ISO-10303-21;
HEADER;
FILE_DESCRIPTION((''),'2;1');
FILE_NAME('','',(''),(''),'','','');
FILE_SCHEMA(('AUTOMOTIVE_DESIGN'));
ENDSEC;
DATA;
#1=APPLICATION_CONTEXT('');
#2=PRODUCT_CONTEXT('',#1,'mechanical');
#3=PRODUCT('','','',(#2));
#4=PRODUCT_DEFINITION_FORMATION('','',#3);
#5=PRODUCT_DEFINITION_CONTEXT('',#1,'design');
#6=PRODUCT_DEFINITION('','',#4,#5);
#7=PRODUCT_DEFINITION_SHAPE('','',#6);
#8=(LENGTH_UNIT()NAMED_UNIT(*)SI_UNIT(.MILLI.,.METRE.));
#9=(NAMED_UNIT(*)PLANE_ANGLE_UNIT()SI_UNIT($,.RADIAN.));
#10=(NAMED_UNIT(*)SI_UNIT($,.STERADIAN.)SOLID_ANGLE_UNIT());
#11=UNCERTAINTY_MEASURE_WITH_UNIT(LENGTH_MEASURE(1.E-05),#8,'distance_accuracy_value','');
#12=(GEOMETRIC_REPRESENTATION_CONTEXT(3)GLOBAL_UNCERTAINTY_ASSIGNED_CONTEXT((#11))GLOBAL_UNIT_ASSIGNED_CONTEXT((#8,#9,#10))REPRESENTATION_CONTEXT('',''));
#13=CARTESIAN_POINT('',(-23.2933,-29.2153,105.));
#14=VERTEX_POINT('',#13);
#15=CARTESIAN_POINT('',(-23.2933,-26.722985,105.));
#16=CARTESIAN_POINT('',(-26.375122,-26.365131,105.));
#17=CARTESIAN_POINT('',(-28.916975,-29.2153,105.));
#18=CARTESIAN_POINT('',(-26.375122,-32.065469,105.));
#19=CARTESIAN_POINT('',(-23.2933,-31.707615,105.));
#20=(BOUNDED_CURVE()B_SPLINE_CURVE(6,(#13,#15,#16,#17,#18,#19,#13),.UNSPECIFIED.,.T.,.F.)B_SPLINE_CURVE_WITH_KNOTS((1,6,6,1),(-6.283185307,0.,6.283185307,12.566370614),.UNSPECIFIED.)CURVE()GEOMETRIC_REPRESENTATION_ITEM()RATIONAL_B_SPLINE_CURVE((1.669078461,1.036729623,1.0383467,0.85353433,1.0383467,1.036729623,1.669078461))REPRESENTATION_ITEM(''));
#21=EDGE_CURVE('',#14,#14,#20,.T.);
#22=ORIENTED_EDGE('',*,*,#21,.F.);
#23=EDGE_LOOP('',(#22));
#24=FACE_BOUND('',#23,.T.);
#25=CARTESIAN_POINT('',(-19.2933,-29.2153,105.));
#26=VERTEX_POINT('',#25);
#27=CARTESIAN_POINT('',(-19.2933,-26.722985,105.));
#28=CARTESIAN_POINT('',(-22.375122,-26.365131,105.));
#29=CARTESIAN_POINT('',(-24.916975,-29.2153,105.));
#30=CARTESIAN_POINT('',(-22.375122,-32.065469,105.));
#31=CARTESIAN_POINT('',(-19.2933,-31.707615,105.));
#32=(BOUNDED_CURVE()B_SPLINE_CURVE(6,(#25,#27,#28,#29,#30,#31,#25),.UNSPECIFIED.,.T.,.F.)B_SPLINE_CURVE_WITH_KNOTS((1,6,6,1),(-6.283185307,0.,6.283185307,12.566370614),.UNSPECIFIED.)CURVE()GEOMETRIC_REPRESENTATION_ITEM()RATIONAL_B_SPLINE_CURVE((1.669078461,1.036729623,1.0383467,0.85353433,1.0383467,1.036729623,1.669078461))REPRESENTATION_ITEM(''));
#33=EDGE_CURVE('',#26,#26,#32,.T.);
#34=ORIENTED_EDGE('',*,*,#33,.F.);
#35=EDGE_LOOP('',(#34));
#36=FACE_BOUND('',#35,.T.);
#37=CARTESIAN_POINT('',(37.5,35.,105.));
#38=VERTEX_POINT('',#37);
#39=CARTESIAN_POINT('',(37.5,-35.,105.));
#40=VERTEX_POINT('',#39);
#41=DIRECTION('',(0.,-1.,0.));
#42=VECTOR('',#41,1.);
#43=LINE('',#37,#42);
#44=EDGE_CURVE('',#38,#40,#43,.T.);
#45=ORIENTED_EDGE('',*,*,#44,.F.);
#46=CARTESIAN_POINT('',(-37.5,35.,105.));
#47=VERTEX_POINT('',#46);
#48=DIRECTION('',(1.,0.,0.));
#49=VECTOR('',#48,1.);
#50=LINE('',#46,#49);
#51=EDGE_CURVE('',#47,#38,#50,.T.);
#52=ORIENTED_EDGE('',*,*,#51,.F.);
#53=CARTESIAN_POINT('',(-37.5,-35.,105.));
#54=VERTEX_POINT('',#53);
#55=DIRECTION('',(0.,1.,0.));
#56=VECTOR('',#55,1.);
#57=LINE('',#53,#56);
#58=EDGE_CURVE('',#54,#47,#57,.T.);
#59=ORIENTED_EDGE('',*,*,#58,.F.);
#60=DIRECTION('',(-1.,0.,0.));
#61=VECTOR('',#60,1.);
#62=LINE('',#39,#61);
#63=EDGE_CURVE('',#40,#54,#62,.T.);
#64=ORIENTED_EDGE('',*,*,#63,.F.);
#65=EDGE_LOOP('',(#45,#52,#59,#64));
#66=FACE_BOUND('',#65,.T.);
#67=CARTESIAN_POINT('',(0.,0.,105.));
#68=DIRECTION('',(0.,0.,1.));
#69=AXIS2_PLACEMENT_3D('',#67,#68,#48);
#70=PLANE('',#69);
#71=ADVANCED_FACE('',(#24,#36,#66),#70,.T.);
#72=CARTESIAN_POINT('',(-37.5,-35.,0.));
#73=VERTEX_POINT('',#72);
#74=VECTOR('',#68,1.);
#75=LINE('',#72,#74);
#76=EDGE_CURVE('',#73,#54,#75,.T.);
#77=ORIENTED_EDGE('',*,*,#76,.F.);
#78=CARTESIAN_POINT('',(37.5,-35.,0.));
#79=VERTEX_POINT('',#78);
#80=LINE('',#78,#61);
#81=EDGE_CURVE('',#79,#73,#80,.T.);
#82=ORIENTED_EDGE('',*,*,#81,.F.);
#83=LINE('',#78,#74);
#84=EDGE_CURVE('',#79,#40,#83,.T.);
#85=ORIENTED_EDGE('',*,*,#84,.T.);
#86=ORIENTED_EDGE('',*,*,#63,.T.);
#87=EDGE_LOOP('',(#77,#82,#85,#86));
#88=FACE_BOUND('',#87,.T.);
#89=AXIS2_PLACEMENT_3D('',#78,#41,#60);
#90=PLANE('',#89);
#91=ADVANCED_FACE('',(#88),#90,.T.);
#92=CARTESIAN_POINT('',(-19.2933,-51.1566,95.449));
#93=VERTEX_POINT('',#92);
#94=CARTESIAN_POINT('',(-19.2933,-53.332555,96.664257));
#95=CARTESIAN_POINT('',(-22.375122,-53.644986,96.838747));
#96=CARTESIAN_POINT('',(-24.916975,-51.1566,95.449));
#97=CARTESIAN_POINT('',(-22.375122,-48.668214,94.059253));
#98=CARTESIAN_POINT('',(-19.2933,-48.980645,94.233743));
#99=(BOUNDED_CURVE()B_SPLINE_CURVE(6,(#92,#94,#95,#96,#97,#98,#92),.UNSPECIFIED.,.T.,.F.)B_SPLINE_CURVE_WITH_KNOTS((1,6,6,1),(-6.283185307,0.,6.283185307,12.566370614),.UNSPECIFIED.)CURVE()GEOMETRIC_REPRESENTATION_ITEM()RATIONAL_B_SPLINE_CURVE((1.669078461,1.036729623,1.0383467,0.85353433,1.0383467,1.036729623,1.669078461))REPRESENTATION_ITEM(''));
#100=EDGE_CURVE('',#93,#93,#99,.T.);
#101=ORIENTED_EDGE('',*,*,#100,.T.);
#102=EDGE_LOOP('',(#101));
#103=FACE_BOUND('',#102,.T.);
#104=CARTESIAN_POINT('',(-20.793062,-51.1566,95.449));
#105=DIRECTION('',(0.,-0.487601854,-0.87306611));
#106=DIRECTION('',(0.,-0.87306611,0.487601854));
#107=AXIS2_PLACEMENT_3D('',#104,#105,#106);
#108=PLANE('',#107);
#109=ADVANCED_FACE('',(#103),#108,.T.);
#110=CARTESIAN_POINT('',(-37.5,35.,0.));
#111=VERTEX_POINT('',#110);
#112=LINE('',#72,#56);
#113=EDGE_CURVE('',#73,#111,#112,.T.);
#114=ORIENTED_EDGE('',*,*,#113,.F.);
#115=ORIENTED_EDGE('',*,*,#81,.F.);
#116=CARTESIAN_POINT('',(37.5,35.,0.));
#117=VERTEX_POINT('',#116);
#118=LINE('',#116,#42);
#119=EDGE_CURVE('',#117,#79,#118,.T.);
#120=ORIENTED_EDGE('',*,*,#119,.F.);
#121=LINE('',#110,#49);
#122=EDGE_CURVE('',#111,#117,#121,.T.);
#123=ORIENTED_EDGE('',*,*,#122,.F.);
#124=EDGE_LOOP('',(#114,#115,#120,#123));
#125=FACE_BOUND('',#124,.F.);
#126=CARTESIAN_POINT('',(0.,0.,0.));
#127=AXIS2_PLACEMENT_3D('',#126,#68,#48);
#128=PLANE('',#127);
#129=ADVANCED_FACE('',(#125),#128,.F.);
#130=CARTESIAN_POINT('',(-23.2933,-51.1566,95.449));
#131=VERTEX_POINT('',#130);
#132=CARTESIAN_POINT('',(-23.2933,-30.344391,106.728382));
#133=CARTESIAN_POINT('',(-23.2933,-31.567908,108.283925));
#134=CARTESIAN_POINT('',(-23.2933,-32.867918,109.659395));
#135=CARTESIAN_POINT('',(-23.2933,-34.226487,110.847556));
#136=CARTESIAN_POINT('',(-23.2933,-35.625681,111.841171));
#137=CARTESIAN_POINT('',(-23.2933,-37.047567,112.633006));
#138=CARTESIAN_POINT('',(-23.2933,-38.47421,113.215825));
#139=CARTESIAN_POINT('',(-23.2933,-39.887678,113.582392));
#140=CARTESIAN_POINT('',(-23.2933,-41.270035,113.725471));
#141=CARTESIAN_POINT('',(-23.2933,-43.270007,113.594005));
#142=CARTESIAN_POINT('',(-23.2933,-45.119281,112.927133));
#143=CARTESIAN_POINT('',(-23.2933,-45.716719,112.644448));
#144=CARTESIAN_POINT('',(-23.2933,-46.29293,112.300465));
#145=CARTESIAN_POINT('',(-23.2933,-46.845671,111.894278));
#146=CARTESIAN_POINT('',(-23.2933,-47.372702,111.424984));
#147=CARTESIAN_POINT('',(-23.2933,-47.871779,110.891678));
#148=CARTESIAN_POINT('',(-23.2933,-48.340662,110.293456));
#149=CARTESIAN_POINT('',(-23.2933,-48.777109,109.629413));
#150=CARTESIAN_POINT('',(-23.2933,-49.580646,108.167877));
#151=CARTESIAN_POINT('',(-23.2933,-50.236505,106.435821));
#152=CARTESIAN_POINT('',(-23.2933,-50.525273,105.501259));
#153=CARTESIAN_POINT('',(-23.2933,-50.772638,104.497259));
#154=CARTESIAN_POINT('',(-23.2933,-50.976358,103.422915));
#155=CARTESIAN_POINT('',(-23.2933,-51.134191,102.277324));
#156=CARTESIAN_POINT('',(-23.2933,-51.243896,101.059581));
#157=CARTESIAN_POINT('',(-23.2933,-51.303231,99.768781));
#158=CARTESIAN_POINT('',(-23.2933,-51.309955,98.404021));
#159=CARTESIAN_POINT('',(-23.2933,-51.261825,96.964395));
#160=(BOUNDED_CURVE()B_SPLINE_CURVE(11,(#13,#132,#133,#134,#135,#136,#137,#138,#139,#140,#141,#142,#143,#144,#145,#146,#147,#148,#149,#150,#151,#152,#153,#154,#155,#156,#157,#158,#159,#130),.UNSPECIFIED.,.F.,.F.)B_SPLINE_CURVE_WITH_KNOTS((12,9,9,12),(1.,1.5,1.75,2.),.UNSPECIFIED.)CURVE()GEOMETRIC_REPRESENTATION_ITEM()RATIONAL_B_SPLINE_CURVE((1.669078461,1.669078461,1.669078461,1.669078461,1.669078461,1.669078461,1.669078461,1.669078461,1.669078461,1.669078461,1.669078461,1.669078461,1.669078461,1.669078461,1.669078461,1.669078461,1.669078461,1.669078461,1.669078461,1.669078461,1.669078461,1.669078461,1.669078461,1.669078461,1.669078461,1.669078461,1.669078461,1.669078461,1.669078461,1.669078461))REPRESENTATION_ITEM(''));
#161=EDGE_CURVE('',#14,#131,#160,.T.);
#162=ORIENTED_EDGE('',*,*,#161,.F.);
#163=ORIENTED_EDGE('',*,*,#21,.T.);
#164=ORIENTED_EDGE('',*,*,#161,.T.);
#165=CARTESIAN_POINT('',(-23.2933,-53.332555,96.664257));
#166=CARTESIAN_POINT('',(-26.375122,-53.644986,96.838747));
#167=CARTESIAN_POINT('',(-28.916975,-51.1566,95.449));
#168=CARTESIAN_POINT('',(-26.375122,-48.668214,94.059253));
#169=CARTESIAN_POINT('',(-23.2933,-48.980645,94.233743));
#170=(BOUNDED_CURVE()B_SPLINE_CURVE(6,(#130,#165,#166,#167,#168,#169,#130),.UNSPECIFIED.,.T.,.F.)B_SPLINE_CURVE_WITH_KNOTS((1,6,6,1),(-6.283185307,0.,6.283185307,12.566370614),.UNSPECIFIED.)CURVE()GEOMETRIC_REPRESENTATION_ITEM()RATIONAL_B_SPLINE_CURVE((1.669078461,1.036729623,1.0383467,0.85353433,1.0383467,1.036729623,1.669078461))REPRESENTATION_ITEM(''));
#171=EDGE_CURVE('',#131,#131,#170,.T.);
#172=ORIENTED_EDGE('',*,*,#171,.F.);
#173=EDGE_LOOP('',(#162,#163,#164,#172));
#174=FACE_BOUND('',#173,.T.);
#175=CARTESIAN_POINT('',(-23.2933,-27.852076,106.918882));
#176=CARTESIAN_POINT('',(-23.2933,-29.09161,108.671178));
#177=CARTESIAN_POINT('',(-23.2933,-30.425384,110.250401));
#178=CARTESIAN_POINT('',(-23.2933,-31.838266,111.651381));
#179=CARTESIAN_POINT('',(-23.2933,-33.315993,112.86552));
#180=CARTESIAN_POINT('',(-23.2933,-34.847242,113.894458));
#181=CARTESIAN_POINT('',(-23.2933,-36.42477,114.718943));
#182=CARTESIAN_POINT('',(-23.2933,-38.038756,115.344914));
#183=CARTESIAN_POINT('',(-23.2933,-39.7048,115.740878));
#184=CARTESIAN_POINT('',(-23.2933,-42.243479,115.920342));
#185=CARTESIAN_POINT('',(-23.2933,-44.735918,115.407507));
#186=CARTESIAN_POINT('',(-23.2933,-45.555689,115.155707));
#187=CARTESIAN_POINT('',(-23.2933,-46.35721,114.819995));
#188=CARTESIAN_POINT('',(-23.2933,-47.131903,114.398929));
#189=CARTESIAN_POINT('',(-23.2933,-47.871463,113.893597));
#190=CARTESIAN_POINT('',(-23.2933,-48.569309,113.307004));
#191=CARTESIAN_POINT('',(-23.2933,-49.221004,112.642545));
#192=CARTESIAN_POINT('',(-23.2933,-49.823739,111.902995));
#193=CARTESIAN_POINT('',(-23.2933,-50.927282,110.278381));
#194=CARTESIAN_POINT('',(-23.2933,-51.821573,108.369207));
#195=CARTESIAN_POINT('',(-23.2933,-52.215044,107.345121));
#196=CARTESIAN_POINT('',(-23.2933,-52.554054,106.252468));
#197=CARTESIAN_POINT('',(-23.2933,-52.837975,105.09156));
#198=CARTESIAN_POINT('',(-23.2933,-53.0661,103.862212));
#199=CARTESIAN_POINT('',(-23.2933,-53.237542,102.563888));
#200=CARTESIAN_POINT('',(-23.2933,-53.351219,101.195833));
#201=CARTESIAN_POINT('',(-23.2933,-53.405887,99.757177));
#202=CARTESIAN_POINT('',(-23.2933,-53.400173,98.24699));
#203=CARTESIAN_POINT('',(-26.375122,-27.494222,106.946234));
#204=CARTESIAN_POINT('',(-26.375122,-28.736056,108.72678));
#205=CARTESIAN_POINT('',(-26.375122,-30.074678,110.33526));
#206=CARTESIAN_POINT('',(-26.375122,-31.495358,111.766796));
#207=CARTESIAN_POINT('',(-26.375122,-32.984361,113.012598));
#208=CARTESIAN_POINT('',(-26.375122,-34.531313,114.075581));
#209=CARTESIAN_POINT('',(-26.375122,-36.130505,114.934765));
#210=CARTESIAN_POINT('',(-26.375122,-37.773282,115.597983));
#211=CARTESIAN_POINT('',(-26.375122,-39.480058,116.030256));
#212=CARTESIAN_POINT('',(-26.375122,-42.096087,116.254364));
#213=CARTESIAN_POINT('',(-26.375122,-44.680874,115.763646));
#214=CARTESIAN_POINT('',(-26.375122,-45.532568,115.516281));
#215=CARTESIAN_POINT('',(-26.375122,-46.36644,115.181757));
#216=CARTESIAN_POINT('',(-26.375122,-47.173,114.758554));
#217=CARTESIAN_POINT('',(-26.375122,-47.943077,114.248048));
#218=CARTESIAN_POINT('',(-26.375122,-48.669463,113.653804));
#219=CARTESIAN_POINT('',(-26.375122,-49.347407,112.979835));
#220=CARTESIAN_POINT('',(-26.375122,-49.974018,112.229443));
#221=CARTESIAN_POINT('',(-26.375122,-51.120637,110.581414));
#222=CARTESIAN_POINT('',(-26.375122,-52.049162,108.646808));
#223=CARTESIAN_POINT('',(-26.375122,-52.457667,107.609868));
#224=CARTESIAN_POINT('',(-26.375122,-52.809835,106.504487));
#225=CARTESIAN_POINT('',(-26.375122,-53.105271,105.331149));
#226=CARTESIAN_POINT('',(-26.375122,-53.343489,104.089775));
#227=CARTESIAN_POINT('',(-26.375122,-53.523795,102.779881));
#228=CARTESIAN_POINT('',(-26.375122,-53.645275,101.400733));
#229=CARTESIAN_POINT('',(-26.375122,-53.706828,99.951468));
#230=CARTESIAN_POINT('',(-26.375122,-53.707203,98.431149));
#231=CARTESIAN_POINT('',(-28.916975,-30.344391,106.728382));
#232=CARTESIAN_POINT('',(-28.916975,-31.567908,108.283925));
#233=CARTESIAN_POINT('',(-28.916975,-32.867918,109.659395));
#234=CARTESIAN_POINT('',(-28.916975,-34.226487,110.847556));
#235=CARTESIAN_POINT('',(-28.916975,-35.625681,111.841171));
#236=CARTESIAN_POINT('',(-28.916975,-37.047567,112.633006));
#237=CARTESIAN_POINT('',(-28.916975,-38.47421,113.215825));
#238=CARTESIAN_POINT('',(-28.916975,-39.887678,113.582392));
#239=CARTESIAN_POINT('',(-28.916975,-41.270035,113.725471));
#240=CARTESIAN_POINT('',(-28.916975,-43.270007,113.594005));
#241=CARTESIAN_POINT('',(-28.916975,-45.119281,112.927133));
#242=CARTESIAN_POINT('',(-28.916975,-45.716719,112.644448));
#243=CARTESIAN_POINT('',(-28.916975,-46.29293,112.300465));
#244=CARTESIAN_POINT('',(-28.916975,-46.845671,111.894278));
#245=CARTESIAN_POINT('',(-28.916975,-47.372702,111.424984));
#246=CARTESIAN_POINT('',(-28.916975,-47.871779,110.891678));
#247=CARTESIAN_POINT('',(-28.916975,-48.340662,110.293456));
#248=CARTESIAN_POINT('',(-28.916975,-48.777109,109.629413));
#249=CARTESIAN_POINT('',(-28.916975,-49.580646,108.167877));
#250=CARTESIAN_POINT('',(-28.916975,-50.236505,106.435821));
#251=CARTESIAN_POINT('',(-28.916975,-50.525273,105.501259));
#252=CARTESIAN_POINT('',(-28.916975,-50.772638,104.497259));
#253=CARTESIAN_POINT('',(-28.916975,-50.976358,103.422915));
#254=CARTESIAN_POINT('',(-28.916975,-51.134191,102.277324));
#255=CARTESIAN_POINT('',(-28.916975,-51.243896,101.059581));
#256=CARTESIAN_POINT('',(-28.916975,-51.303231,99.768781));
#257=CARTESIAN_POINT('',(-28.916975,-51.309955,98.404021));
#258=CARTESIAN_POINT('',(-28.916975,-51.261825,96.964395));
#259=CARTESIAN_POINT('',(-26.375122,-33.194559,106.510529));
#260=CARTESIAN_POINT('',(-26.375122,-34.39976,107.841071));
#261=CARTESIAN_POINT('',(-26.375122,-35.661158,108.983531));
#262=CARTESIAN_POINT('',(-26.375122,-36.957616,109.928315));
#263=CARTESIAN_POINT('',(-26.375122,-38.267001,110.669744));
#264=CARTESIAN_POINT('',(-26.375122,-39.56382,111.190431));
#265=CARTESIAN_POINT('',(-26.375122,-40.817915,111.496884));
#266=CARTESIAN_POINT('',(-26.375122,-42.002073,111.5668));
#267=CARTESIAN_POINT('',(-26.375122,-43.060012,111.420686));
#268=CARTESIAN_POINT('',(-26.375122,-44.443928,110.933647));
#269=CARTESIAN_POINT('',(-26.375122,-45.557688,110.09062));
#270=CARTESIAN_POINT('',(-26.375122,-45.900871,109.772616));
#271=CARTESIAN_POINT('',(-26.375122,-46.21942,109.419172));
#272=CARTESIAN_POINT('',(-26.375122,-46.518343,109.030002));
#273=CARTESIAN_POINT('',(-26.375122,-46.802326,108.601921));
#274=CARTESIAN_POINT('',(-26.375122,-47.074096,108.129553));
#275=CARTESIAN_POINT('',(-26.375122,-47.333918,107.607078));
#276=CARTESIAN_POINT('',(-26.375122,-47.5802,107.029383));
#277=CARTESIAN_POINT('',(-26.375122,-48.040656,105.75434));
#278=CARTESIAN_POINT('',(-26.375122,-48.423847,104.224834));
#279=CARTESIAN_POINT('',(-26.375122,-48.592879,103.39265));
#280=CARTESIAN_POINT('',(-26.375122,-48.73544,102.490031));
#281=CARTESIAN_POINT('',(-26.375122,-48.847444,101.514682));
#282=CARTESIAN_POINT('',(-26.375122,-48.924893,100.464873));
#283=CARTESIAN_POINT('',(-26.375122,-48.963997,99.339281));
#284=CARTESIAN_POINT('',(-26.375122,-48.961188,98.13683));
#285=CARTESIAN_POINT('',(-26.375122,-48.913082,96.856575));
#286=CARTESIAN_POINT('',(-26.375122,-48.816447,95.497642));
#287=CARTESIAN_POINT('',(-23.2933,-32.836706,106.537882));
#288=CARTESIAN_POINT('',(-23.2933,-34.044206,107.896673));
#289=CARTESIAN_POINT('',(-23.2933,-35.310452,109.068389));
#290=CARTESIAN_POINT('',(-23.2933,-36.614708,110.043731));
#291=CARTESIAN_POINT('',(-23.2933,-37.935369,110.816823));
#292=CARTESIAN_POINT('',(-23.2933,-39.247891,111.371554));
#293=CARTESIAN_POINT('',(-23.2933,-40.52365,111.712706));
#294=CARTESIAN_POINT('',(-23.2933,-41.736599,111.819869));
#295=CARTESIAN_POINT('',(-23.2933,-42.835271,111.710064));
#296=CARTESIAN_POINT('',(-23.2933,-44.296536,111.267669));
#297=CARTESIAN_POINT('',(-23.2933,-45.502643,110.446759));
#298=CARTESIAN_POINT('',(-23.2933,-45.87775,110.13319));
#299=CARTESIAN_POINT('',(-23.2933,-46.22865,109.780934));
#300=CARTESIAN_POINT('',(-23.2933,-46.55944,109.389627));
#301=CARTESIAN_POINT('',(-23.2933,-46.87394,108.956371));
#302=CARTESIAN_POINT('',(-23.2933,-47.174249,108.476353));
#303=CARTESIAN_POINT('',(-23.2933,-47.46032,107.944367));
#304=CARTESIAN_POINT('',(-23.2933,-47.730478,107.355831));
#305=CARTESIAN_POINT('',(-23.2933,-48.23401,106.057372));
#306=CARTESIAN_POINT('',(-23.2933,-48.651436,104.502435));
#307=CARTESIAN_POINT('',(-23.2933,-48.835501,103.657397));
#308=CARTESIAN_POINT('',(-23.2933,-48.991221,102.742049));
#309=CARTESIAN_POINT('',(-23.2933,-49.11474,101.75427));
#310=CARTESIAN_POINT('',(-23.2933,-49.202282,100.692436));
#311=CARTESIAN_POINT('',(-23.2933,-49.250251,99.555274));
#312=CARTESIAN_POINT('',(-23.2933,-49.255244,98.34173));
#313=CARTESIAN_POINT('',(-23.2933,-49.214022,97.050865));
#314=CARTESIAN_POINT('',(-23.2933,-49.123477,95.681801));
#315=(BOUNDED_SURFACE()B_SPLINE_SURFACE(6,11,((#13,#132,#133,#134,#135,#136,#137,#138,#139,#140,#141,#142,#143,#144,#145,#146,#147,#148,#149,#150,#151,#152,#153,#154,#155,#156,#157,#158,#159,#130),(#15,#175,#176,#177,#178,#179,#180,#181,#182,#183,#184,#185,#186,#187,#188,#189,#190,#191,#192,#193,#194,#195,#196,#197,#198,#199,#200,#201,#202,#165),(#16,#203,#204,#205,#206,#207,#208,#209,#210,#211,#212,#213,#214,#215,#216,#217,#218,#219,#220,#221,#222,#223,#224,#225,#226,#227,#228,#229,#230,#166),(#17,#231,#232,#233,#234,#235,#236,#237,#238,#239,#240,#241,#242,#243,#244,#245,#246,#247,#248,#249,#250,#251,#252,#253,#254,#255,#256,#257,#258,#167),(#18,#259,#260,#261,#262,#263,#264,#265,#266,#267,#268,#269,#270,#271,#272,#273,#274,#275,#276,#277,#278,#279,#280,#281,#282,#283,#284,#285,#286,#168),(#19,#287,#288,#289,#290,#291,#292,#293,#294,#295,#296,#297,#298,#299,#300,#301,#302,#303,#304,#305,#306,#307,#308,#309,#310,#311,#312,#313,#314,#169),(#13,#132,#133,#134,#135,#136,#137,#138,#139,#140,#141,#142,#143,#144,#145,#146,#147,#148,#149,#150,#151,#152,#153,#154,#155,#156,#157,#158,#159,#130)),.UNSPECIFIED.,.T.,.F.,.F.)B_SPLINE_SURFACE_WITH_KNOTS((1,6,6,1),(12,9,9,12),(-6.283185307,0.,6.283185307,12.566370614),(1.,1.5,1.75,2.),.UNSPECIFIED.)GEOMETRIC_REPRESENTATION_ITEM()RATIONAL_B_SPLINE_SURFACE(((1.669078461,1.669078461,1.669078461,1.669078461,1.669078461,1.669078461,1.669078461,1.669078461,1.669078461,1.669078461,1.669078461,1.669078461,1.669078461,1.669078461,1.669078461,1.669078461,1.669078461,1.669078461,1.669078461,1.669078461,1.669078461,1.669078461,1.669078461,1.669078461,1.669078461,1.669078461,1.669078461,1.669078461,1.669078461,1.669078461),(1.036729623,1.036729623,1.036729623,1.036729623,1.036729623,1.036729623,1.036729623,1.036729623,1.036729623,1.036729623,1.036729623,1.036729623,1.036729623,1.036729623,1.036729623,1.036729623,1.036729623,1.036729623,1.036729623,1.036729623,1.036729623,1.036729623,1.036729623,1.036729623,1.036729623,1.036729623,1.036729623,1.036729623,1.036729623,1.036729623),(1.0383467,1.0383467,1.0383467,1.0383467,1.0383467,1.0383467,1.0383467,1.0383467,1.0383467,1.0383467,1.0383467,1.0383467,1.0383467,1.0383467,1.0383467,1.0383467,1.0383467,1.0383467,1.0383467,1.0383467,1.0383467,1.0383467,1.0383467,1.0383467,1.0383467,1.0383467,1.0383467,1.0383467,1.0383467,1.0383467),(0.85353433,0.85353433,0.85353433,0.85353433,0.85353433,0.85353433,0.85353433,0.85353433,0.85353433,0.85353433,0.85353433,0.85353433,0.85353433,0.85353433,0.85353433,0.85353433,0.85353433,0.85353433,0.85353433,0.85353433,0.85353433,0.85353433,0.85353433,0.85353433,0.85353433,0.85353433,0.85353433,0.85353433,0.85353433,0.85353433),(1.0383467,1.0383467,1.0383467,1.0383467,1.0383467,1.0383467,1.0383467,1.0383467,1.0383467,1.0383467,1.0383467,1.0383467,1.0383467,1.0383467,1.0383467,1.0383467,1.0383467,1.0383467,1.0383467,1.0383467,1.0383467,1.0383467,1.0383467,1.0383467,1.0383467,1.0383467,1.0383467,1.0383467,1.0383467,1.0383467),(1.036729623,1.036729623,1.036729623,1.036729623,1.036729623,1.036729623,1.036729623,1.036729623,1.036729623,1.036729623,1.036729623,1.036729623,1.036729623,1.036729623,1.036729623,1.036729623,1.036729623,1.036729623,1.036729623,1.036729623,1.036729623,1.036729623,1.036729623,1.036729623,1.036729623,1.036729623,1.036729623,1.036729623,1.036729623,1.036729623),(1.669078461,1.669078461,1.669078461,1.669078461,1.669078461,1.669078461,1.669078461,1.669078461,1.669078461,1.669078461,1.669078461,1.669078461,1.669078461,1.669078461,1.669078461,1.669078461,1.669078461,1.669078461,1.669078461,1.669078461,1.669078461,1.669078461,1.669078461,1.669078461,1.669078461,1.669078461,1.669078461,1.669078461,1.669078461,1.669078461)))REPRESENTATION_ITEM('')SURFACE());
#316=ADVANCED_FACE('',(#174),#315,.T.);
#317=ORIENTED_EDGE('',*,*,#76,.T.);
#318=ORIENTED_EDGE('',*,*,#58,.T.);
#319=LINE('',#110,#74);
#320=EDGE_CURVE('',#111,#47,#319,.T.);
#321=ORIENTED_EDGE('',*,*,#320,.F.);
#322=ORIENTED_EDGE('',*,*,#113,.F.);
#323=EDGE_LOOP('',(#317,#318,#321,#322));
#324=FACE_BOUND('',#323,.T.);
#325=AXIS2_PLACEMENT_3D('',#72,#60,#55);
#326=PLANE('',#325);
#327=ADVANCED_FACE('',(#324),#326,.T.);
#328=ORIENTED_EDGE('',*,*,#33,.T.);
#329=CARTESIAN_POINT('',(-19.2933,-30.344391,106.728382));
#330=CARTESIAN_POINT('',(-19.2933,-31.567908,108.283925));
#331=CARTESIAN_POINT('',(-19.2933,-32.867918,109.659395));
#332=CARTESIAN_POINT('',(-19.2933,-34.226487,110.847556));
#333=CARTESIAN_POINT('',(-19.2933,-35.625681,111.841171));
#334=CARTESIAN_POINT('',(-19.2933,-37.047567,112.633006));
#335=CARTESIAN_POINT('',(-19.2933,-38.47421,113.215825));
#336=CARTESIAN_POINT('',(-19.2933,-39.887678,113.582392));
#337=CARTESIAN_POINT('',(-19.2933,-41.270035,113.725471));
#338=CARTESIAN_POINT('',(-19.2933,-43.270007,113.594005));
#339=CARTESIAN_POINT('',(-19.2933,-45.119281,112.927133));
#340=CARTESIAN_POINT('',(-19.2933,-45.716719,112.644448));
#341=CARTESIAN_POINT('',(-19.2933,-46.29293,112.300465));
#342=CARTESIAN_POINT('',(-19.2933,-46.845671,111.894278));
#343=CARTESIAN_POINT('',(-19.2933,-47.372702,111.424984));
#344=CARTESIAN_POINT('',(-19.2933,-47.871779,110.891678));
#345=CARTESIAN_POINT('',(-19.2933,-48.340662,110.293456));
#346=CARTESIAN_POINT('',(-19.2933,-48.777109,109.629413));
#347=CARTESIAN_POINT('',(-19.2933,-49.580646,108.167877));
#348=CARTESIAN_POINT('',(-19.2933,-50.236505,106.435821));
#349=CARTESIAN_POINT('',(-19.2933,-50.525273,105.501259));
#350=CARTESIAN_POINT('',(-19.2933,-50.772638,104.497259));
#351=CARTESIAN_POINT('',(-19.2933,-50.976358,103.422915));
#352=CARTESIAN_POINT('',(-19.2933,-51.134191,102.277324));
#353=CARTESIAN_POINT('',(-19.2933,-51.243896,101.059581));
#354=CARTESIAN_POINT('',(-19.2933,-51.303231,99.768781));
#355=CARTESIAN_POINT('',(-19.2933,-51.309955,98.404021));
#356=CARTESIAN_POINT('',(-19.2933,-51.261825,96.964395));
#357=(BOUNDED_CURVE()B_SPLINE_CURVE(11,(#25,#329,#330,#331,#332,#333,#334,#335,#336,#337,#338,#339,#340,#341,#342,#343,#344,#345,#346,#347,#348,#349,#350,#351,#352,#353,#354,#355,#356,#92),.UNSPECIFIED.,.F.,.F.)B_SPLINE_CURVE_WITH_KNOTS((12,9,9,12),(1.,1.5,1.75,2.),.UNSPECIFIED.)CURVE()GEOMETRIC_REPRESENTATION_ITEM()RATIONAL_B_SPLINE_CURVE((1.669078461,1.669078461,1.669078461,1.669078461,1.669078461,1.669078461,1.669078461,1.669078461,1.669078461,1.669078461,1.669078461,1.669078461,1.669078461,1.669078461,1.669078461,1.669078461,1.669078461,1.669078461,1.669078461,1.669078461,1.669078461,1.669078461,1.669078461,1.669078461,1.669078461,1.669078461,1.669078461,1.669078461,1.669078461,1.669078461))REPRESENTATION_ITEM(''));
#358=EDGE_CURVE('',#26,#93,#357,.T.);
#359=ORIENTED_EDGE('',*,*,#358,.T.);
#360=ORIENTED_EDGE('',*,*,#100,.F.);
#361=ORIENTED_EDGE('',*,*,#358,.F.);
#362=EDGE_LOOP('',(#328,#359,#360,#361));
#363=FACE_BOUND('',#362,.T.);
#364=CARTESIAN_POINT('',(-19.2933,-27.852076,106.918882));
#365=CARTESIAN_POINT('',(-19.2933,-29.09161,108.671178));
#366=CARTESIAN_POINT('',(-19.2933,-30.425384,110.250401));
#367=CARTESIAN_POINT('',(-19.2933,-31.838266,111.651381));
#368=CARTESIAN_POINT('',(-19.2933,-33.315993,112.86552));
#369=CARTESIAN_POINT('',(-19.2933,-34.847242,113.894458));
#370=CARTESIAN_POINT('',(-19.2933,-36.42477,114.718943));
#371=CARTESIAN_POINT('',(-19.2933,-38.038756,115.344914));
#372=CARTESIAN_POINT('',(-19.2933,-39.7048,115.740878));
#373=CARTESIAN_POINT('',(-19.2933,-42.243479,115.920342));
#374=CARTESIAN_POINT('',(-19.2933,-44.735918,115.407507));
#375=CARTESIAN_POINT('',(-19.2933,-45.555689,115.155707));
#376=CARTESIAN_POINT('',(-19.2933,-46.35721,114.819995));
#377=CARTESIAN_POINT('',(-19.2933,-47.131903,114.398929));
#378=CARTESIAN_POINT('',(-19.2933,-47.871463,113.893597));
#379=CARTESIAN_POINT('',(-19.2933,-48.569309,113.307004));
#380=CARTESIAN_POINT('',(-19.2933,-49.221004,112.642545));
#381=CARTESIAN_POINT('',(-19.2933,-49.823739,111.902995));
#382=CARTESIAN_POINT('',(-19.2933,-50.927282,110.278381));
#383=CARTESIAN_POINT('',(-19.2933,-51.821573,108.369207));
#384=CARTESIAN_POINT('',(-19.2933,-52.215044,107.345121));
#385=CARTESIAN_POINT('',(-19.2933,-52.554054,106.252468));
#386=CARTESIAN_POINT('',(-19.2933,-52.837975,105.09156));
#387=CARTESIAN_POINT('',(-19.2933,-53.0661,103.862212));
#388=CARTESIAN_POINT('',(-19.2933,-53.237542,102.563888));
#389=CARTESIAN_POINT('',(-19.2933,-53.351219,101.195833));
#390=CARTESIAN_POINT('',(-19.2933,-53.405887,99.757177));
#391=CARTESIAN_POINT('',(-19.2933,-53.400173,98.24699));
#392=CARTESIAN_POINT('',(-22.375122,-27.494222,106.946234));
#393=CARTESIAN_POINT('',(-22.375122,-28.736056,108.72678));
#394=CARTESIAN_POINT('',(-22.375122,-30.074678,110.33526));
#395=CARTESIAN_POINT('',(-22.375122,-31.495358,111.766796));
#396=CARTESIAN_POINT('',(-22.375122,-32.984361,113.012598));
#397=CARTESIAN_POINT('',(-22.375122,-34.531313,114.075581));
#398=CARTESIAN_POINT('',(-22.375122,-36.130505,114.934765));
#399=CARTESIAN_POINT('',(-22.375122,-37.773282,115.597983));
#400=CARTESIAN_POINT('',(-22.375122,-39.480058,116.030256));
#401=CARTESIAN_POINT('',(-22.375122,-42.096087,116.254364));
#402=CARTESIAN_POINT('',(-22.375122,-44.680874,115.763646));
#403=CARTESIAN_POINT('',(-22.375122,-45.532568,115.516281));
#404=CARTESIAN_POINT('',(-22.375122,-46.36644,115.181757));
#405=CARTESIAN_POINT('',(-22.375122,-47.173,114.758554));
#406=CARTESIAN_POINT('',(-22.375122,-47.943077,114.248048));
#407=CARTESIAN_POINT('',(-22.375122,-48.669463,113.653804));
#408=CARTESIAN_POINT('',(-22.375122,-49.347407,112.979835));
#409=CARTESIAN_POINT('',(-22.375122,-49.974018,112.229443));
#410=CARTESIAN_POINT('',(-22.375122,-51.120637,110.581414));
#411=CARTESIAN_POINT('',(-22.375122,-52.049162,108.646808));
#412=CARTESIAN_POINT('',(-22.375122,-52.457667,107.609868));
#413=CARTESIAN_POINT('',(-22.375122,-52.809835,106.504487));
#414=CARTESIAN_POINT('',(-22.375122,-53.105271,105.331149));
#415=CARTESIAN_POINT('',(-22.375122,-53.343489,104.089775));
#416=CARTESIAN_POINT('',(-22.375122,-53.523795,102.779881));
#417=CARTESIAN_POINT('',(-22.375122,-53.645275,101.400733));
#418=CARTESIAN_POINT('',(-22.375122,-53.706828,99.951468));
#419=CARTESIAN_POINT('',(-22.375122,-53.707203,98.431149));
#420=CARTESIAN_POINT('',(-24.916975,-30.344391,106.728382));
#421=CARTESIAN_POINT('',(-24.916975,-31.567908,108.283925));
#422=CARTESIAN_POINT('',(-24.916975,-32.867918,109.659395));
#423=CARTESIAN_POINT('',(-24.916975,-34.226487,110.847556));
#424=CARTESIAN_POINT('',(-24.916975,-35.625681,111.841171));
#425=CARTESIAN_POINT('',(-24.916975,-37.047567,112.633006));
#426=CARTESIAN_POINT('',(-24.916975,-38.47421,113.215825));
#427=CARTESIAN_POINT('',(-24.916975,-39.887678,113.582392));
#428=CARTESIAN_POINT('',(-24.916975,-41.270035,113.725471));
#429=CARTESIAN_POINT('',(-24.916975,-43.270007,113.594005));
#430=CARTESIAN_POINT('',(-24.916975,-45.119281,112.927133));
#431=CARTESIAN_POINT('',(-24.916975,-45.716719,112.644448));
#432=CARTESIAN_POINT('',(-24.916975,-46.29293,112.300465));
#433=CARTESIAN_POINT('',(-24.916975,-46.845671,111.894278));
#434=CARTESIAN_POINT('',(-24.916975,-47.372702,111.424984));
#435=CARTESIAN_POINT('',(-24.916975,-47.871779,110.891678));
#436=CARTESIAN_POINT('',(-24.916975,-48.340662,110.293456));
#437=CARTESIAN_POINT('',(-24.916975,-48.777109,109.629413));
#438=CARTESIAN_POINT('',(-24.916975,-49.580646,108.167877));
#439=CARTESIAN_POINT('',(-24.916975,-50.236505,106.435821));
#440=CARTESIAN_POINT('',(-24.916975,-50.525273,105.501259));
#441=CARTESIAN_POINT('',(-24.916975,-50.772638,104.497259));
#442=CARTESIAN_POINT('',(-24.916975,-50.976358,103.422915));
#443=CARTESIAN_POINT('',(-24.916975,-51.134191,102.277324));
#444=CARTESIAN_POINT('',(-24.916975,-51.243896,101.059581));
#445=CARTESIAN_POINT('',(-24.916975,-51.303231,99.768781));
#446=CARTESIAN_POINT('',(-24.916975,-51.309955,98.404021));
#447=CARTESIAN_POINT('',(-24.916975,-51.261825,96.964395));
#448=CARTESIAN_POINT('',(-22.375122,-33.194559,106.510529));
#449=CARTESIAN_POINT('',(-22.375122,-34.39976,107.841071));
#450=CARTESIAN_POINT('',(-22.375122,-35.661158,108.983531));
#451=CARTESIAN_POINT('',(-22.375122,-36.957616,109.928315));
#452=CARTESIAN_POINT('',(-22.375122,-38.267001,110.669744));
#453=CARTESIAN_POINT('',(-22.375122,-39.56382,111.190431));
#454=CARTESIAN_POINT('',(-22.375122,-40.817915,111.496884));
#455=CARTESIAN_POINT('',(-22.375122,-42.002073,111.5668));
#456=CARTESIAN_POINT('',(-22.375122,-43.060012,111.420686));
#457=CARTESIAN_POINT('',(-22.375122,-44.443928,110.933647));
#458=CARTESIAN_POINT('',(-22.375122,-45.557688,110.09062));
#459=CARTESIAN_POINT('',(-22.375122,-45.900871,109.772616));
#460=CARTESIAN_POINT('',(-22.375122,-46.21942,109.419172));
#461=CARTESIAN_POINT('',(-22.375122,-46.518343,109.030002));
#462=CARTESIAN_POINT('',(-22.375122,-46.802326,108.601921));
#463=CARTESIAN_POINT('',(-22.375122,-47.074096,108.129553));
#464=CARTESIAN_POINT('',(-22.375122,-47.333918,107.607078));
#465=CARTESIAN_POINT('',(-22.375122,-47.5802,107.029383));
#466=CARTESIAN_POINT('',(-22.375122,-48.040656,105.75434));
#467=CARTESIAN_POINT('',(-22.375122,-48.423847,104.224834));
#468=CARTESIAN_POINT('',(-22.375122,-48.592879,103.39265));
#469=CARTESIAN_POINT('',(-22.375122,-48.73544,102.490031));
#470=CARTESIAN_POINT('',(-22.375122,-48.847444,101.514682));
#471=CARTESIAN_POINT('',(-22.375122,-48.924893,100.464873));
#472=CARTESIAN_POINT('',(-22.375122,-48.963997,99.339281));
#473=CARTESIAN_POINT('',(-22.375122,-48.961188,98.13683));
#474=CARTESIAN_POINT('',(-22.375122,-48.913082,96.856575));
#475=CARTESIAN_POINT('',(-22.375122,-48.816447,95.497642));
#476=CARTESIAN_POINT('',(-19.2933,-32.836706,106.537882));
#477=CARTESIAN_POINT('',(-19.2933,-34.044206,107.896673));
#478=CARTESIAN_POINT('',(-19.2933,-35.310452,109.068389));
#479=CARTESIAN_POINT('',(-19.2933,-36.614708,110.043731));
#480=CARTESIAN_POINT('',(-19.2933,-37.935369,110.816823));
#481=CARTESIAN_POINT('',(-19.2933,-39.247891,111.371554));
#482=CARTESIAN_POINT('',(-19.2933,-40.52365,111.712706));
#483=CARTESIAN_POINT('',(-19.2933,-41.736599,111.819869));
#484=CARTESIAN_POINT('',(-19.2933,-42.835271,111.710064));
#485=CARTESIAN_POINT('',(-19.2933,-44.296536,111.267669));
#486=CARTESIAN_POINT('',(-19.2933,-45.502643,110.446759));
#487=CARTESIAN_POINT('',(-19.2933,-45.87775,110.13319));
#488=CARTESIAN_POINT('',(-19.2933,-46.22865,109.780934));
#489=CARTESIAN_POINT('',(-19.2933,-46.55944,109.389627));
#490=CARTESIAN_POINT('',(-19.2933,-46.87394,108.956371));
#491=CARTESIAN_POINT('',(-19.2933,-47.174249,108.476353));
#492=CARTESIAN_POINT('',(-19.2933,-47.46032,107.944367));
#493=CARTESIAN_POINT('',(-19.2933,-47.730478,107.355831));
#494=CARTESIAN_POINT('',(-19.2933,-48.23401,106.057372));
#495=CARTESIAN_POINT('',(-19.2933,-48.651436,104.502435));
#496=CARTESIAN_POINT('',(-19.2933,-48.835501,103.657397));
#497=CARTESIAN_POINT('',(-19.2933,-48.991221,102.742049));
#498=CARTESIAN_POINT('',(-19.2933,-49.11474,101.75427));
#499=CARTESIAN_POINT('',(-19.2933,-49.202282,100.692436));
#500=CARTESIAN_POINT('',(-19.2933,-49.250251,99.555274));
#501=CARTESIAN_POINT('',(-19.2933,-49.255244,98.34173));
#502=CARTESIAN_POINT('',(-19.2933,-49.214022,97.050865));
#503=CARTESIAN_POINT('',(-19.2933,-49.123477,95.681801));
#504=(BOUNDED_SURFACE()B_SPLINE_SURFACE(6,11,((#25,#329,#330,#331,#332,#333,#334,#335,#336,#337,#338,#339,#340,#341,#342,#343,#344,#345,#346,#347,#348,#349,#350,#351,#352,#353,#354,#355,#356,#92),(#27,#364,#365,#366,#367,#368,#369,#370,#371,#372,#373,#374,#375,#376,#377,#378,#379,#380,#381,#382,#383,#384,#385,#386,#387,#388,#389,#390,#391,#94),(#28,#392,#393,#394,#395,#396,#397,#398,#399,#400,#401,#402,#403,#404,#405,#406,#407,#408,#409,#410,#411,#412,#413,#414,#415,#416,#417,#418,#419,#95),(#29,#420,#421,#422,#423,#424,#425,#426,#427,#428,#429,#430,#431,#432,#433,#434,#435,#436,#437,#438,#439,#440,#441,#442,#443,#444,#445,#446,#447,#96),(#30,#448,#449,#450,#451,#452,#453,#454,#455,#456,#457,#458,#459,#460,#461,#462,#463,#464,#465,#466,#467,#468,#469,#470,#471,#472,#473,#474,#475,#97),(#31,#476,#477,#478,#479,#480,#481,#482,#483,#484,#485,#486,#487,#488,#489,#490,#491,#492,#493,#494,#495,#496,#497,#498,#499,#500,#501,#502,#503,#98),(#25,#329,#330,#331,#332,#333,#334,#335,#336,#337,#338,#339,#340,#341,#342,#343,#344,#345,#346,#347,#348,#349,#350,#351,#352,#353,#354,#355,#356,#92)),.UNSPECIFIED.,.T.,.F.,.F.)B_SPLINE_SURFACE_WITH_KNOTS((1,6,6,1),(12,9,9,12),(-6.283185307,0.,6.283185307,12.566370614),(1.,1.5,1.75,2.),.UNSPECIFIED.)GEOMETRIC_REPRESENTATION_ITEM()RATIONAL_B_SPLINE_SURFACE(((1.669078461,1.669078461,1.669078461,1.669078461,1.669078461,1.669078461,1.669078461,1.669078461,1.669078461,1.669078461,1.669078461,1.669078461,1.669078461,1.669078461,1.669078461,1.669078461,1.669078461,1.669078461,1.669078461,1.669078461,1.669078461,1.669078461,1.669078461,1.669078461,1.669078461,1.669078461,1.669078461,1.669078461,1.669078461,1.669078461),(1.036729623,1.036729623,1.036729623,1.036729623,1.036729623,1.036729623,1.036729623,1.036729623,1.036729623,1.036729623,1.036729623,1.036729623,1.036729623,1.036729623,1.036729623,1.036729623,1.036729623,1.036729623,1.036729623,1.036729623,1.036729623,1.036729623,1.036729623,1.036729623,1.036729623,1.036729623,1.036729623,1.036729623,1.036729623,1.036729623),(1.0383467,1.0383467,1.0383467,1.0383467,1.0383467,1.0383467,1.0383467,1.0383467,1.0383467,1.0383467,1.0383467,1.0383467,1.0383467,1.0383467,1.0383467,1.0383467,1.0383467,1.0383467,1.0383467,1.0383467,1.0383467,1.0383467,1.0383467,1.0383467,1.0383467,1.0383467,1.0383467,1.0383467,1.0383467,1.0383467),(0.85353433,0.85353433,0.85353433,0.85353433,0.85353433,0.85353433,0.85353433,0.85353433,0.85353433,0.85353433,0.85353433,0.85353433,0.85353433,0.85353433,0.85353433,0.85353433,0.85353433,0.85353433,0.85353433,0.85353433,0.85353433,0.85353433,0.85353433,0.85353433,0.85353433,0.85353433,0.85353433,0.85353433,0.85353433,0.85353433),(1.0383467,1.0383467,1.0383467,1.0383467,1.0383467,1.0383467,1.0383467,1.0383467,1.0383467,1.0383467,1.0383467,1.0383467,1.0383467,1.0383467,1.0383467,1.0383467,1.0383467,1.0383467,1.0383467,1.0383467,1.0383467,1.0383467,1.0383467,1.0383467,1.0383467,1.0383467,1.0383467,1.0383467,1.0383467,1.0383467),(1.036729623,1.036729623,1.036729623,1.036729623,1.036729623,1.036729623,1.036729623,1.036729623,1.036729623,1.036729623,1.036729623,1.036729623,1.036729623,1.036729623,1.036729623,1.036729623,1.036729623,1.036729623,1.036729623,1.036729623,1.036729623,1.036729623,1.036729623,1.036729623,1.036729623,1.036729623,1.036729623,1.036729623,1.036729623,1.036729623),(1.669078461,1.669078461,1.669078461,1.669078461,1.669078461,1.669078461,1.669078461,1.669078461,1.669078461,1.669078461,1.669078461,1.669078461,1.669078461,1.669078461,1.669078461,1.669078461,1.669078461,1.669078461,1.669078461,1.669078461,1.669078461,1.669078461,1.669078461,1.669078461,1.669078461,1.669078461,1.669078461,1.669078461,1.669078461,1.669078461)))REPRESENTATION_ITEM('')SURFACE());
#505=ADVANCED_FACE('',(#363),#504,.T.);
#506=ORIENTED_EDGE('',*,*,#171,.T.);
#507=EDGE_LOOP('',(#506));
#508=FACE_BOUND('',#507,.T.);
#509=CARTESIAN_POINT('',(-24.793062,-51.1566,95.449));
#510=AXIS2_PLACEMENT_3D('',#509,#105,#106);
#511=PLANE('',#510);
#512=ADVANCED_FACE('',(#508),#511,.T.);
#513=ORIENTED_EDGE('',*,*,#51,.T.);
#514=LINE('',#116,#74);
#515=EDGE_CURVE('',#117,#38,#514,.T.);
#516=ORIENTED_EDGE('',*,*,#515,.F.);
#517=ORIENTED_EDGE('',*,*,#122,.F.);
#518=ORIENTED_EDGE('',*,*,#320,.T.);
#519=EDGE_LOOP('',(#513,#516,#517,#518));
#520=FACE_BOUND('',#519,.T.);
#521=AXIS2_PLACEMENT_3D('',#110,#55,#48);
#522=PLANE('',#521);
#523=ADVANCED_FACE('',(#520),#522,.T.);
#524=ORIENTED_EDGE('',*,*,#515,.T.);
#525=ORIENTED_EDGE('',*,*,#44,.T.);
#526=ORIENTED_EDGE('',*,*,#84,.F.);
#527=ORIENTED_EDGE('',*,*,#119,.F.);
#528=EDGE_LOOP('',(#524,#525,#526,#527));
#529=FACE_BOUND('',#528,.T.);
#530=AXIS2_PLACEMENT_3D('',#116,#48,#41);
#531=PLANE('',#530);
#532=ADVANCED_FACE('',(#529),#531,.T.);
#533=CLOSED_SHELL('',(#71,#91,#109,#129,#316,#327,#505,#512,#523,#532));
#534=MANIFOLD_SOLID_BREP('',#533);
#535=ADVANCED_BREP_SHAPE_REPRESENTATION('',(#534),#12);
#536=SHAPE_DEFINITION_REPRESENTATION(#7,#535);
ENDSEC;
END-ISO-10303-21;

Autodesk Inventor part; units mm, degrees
ref_plane "YZ Plane" through (0, 0, 0) normal (1, 0, 0) x (0, 1, 0)
ref_plane "XZ Plane" through (0, 0, 0) normal (0, 1, 0) x (-1, 0, 0)
sketch "Sketch1" plane through (0, 0, 0) normal (0, 0, 1) x (1, 0, 0)
  line L0 (-37.5, 35) -> (37.5, 35)
  line L1 (37.5, 35) -> (37.5, -35)
  line L2 (37.5, -35) -> (-37.5, -35)
  line L3 (-37.5, -35) -> (-37.5, 35)
  line L4 (-37.5, 35) -> (37.5, -35) construction
  line L5 (37.5, 35) -> (-37.5, -35) construction
  point P0 (0, 0)
  dimension "d0" = 75
  dimension "d1" = 70
extrude "Extrusion1" add sketch "Sketch1" along normal blind 105
sketch "Sketch2" plane through (0, 0, 105) normal (0, 0, 1) x (1, 0, 0)
  circle A0 centre (-24.7933, -29.2153) radius 1.5
  circle A1 centre (-20.7933, -29.2153) radius 1.5
  point P0 (0, 0)
  dimension "d4" = 3
  dimension "d5" = 3
  dimension "d6" = 4
ref_plane "Work Plane2" through (-24.7933, -29.2153, 105) normal (1, 0, 0) x (0, 1, 0)
sketch "Sketch3" plane through (-24.7933, -29.2153, 105) normal (1, 0, 0) x (0, 1, 0)
  line L0 (0, 0) -> (-8.28, 12.6748) construction
  line L1 (-8.28, 12.6748) -> (-23.4846, 12.6748) construction
  line L2 (-23.4846, 12.6748) -> (-21.9413, -9.551) construction
  spline S0 degree 3 poles (0, 0) (-8.28, 12.6748) (-23.4846, 12.6748) (-21.9413, -9.551) knots 1 1 1 1 2 2 2 2
  point P0 (29.2153, -105)
sweep "Sweep1" add profiles "Sketch2" path "Sketch3" contours A0
pattern_linear "Rectangular Pattern1" count 2 spacing 4 along (1, 0, 0) of "Sweep1"
properties part number "battery_24V"
